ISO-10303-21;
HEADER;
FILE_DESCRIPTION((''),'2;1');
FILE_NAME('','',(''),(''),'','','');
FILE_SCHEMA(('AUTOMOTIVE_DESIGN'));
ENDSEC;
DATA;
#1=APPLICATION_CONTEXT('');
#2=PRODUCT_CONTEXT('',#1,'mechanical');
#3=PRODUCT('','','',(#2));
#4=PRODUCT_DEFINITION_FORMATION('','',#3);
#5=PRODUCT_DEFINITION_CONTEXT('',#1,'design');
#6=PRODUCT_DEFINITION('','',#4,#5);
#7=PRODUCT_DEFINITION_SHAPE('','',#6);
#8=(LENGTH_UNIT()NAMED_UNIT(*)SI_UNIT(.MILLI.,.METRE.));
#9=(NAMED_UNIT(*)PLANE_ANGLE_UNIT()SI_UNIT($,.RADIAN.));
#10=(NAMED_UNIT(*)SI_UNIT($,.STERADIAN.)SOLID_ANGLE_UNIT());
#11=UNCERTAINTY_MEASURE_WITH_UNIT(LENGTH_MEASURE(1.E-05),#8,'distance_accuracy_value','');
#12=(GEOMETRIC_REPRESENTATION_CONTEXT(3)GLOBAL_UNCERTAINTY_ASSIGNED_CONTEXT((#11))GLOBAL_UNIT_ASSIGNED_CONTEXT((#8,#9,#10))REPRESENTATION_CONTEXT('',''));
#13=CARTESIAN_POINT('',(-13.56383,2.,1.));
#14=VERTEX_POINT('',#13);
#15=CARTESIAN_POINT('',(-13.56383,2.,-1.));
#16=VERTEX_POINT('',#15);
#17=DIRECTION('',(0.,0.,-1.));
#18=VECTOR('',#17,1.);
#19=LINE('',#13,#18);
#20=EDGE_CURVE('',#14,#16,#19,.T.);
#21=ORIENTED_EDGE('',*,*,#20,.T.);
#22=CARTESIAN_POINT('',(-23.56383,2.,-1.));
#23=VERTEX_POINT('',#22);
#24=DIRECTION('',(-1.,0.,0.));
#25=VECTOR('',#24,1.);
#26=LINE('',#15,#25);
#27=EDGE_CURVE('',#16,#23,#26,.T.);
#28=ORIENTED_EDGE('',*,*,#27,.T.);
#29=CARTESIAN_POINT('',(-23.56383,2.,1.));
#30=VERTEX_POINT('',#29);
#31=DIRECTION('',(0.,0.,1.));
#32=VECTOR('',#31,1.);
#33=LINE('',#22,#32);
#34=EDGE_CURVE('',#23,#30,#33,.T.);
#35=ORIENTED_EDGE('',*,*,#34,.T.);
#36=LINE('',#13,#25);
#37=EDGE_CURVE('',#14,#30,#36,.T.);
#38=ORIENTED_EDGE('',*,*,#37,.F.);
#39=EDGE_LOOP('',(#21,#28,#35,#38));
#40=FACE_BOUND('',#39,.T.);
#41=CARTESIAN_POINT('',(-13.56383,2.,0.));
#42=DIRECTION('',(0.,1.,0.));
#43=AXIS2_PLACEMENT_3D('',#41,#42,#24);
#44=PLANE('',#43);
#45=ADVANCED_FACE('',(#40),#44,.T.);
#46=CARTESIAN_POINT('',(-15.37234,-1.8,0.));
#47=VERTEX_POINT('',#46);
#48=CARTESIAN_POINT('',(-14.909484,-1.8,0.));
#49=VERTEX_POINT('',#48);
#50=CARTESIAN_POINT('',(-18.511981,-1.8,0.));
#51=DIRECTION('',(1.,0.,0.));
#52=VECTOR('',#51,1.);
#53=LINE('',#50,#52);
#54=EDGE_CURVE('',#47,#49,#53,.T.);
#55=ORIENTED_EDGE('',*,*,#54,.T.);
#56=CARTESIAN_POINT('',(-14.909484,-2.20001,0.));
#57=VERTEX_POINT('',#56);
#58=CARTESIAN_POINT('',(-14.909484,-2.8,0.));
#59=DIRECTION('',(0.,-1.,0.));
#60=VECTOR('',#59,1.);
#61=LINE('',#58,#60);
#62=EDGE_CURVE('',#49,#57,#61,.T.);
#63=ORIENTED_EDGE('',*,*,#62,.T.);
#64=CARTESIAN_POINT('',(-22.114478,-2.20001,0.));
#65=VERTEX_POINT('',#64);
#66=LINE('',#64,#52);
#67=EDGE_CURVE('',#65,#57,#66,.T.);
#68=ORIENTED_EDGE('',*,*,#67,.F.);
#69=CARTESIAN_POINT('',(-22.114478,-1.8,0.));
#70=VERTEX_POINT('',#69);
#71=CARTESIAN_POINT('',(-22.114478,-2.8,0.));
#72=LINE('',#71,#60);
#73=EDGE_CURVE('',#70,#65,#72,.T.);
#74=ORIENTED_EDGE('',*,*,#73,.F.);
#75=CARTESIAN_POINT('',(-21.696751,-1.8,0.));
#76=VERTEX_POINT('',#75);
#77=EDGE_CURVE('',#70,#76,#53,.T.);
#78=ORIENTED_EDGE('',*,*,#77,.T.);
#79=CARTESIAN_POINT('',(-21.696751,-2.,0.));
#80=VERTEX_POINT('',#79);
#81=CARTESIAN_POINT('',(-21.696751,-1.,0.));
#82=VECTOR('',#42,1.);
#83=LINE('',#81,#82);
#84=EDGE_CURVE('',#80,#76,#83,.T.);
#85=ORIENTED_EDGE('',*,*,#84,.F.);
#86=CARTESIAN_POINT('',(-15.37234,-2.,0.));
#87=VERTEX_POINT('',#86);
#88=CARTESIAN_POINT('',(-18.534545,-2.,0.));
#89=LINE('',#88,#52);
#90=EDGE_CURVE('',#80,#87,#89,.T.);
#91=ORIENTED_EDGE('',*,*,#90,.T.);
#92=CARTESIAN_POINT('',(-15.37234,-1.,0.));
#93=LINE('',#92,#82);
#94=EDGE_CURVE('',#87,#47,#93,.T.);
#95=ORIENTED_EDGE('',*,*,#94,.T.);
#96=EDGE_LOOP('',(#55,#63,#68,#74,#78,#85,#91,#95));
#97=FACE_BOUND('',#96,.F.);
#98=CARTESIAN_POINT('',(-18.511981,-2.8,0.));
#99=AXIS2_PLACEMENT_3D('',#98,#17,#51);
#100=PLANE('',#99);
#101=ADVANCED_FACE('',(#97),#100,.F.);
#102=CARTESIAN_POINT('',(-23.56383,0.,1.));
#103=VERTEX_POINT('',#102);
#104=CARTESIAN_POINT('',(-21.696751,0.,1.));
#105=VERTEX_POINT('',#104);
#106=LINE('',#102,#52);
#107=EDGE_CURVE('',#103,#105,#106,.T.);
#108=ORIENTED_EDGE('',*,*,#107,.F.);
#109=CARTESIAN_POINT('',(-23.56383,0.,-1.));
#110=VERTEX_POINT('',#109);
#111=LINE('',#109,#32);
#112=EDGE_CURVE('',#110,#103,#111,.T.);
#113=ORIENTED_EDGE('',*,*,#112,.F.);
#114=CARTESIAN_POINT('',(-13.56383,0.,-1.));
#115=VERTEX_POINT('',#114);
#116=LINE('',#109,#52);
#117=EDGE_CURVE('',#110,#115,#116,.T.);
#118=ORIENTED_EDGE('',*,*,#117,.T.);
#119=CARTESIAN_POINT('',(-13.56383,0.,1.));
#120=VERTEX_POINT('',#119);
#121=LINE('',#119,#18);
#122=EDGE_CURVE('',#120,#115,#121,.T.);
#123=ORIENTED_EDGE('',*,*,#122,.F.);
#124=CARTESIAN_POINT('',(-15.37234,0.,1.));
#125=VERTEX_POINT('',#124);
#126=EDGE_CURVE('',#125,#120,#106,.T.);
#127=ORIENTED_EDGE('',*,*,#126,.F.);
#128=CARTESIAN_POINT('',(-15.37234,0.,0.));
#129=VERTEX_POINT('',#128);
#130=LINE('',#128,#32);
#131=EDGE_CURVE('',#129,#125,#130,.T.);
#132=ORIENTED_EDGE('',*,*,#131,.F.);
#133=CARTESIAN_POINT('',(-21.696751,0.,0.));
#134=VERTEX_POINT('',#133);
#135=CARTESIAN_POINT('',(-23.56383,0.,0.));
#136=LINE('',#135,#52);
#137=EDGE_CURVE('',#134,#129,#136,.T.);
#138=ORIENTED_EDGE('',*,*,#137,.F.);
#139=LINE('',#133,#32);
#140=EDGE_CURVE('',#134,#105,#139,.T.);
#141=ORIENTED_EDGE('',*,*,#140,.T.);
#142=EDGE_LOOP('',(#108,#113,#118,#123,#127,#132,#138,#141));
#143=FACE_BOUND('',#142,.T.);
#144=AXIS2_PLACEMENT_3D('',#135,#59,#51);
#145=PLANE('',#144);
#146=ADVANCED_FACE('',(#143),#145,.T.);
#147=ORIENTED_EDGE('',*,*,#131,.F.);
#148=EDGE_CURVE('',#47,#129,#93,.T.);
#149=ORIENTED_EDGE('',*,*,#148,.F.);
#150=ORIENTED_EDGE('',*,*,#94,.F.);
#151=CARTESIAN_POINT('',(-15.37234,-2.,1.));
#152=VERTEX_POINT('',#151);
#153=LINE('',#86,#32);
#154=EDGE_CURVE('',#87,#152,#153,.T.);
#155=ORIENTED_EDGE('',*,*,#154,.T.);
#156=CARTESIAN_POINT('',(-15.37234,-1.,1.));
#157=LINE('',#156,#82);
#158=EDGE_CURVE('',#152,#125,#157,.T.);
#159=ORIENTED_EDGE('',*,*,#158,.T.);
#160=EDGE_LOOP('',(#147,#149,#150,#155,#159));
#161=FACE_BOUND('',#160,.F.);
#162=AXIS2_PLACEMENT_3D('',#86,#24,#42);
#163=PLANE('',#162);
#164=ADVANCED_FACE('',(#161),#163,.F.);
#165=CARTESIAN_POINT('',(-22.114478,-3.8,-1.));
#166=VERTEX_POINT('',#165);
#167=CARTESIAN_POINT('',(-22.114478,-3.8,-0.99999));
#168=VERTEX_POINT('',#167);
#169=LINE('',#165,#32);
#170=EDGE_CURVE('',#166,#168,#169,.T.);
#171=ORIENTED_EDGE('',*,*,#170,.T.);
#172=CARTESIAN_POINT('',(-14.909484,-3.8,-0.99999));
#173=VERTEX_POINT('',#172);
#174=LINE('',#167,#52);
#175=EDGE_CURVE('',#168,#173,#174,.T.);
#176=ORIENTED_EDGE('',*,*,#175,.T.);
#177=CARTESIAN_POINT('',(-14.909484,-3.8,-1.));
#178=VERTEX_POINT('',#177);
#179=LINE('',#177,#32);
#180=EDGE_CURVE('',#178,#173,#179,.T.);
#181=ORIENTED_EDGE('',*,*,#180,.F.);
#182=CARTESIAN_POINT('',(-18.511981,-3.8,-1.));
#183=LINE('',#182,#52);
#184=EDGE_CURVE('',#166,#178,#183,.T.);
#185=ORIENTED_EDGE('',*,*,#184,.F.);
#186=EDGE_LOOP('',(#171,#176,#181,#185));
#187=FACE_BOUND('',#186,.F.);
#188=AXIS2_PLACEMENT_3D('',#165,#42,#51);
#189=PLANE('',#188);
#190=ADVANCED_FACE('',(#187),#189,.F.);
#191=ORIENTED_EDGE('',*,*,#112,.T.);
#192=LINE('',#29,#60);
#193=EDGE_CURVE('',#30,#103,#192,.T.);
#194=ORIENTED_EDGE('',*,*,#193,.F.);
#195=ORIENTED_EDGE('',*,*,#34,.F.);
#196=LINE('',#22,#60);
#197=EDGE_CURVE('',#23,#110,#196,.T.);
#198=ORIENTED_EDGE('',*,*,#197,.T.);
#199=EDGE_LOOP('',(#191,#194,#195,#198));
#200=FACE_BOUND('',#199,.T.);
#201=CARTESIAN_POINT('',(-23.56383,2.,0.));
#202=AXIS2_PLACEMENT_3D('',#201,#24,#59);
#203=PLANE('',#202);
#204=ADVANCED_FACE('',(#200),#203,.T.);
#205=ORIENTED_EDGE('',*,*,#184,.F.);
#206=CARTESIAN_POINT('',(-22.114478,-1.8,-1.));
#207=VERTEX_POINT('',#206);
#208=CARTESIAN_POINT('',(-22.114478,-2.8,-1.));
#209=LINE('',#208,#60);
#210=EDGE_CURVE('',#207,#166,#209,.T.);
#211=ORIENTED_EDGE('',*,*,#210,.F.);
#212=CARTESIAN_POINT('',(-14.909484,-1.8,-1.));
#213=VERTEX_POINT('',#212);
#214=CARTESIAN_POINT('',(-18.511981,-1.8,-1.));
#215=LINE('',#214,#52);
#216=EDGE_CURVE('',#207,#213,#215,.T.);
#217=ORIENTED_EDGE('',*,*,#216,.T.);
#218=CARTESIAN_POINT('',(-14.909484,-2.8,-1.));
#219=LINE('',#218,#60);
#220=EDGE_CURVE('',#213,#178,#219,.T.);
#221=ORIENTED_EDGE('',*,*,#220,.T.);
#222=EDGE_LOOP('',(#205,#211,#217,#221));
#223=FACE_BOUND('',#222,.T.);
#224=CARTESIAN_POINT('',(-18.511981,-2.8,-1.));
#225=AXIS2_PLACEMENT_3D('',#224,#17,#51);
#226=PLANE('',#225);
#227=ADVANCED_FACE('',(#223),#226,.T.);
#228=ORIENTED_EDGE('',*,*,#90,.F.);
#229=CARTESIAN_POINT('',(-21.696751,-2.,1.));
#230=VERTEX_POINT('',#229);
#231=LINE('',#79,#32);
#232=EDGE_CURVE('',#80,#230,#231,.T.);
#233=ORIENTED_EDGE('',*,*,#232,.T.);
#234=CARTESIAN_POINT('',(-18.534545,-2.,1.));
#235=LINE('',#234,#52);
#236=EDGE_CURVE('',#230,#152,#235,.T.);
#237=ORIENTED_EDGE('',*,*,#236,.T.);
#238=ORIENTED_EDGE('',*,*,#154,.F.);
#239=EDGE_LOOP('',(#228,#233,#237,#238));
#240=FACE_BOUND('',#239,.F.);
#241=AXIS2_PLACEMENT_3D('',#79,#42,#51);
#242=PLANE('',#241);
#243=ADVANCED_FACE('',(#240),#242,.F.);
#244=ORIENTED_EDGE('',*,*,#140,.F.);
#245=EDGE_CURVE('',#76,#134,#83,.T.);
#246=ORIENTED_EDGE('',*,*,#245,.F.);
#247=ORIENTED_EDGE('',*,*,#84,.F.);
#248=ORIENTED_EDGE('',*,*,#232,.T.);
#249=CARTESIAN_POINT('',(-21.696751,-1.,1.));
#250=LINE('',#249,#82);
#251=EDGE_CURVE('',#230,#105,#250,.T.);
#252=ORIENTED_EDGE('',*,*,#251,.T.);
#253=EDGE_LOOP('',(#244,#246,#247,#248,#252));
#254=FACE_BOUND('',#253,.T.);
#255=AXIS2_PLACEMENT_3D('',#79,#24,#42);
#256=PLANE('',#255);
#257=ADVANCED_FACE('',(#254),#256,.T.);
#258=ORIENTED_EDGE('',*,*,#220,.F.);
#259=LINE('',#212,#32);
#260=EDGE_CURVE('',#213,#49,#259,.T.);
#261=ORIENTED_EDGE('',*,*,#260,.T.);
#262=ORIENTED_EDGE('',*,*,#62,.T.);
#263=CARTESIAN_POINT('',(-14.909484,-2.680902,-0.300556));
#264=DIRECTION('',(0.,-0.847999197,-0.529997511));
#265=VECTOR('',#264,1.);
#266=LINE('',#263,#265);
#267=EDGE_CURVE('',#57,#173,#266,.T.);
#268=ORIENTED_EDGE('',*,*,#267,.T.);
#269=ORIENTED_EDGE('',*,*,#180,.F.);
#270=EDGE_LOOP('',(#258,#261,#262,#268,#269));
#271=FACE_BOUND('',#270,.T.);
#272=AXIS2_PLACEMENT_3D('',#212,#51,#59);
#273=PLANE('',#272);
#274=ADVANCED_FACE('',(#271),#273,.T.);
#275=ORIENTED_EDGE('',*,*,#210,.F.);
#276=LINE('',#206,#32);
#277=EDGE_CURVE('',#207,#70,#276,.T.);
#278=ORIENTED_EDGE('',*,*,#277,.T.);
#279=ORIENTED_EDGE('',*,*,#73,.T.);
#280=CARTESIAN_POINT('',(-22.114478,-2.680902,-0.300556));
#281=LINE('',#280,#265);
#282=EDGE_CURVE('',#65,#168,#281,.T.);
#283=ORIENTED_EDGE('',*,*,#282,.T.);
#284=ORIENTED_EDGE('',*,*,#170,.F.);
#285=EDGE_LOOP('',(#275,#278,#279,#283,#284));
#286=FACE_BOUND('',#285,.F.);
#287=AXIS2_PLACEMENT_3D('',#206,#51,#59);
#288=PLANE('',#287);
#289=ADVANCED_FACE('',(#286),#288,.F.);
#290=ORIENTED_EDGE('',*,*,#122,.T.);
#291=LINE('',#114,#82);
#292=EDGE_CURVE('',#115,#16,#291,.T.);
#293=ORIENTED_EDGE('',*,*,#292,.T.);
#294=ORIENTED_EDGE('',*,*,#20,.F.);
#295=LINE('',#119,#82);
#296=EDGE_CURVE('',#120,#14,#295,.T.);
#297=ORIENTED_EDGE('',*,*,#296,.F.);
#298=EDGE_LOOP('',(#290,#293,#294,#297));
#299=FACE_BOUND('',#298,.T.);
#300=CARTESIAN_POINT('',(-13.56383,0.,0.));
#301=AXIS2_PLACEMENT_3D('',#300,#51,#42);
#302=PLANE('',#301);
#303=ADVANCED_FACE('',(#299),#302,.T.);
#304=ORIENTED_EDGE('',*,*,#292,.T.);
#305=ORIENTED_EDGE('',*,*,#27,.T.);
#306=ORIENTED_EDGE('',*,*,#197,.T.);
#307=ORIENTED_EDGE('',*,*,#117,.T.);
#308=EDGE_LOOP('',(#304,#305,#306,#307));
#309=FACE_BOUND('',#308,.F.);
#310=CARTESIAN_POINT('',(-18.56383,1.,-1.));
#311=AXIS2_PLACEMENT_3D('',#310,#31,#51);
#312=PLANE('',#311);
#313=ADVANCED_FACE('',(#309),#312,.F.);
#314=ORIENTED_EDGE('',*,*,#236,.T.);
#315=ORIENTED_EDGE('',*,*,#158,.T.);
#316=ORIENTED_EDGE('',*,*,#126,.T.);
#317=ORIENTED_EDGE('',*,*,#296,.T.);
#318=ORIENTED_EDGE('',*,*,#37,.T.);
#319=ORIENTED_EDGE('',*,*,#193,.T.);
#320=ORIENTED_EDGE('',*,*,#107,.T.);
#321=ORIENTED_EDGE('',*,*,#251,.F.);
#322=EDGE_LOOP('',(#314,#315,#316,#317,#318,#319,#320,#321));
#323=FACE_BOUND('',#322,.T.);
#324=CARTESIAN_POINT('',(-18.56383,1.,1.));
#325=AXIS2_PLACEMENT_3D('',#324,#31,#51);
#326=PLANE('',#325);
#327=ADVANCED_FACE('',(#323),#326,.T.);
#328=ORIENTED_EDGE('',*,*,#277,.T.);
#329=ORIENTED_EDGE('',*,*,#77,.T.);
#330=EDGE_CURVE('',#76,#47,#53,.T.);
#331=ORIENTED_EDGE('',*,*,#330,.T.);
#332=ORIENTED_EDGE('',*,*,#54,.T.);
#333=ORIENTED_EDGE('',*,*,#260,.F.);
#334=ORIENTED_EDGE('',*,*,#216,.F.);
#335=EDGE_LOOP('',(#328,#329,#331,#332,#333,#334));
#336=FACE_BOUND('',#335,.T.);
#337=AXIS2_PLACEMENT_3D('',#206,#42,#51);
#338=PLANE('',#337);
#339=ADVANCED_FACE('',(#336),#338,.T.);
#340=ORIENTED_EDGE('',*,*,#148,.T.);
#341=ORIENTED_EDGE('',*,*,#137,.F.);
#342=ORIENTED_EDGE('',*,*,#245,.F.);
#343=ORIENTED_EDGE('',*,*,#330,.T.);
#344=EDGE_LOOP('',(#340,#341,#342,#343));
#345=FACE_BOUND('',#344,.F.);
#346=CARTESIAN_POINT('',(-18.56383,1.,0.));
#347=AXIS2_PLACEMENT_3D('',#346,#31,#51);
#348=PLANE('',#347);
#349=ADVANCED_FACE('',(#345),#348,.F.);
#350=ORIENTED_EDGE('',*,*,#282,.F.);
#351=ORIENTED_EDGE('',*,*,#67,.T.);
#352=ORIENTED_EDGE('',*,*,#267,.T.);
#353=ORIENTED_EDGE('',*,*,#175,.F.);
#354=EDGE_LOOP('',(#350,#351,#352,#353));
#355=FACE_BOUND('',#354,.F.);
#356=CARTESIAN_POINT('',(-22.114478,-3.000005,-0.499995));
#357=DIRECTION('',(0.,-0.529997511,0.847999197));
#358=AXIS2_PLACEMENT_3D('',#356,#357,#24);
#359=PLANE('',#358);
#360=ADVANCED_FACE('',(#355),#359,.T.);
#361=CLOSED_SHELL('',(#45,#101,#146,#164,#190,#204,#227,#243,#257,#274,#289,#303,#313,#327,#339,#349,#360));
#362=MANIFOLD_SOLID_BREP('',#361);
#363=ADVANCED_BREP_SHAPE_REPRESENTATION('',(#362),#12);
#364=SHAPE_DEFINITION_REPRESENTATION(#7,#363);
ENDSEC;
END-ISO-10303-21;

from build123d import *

# Parameters (mm, degrees)
F0_W     = 6.3244109941
F0_H     = 2
F1_DEPTH = 1
F2_DEPTH = 1
F3_W     = 7.2049933622
F3_H     = 2
F4_DEPTH = 1
F5_SIZE2 = 0.99999
F5_SIZE  = 1.59999


# Not quite as in the source:
# - a fillet or chamfer is up to 0.001 mm smaller than in the source, because OpenCascade refuses the exact size


with BuildPart() as f1:
    # F0 (on Top) → F1 (new body)
    with BuildSketch(Plane.XY):
        Polygon((-13.5638297198, 2), (-23.5638297198, 2), (-23.5638297198, 0), (-21.6967508232, 0), (-15.3723398291, 0), (-13.5638297198, 0), align=None)
        with Locations((-18.5345453261, -1)):
            Rectangle(F0_W, F0_H)
    extrude(amount=F1_DEPTH)

    # F0 (on Top) → F2 (join)
    with BuildSketch(Plane.XY):
        Polygon((-13.5638297198, 2), (-23.5638297198, 2), (-23.5638297198, 0), (-21.6967508232, 0), (-15.3723398291, 0), (-13.5638297198, 0), align=None)
    extrude(amount=-F2_DEPTH)

    # F3 (on face) → F4 (join)
    with BuildSketch(Plane(origin=(0, 0, -1), x_dir=(1, 0, 0), z_dir=(0, 0, -1))):
        with Locations((-18.5119810809, 2.8)):
            Rectangle(F3_W, F3_H)
    extrude(amount=-F4_DEPTH)

    # F5 (size 1.6 and 1 in the source; OpenCascade refuses exactly that, so slightly less here)
    f5_edges = [f1.edges().sort_by_distance(p)[0] for p in [
        (-18.511981, -3.8, 0),
    ]]
    f5_side = f1.faces().sort_by_distance((-18.50981, -2.886602, 0))[0]
    chamfer(f5_edges, length=F5_SIZE, length2=F5_SIZE2, reference=f5_side)


solid = f1.part
